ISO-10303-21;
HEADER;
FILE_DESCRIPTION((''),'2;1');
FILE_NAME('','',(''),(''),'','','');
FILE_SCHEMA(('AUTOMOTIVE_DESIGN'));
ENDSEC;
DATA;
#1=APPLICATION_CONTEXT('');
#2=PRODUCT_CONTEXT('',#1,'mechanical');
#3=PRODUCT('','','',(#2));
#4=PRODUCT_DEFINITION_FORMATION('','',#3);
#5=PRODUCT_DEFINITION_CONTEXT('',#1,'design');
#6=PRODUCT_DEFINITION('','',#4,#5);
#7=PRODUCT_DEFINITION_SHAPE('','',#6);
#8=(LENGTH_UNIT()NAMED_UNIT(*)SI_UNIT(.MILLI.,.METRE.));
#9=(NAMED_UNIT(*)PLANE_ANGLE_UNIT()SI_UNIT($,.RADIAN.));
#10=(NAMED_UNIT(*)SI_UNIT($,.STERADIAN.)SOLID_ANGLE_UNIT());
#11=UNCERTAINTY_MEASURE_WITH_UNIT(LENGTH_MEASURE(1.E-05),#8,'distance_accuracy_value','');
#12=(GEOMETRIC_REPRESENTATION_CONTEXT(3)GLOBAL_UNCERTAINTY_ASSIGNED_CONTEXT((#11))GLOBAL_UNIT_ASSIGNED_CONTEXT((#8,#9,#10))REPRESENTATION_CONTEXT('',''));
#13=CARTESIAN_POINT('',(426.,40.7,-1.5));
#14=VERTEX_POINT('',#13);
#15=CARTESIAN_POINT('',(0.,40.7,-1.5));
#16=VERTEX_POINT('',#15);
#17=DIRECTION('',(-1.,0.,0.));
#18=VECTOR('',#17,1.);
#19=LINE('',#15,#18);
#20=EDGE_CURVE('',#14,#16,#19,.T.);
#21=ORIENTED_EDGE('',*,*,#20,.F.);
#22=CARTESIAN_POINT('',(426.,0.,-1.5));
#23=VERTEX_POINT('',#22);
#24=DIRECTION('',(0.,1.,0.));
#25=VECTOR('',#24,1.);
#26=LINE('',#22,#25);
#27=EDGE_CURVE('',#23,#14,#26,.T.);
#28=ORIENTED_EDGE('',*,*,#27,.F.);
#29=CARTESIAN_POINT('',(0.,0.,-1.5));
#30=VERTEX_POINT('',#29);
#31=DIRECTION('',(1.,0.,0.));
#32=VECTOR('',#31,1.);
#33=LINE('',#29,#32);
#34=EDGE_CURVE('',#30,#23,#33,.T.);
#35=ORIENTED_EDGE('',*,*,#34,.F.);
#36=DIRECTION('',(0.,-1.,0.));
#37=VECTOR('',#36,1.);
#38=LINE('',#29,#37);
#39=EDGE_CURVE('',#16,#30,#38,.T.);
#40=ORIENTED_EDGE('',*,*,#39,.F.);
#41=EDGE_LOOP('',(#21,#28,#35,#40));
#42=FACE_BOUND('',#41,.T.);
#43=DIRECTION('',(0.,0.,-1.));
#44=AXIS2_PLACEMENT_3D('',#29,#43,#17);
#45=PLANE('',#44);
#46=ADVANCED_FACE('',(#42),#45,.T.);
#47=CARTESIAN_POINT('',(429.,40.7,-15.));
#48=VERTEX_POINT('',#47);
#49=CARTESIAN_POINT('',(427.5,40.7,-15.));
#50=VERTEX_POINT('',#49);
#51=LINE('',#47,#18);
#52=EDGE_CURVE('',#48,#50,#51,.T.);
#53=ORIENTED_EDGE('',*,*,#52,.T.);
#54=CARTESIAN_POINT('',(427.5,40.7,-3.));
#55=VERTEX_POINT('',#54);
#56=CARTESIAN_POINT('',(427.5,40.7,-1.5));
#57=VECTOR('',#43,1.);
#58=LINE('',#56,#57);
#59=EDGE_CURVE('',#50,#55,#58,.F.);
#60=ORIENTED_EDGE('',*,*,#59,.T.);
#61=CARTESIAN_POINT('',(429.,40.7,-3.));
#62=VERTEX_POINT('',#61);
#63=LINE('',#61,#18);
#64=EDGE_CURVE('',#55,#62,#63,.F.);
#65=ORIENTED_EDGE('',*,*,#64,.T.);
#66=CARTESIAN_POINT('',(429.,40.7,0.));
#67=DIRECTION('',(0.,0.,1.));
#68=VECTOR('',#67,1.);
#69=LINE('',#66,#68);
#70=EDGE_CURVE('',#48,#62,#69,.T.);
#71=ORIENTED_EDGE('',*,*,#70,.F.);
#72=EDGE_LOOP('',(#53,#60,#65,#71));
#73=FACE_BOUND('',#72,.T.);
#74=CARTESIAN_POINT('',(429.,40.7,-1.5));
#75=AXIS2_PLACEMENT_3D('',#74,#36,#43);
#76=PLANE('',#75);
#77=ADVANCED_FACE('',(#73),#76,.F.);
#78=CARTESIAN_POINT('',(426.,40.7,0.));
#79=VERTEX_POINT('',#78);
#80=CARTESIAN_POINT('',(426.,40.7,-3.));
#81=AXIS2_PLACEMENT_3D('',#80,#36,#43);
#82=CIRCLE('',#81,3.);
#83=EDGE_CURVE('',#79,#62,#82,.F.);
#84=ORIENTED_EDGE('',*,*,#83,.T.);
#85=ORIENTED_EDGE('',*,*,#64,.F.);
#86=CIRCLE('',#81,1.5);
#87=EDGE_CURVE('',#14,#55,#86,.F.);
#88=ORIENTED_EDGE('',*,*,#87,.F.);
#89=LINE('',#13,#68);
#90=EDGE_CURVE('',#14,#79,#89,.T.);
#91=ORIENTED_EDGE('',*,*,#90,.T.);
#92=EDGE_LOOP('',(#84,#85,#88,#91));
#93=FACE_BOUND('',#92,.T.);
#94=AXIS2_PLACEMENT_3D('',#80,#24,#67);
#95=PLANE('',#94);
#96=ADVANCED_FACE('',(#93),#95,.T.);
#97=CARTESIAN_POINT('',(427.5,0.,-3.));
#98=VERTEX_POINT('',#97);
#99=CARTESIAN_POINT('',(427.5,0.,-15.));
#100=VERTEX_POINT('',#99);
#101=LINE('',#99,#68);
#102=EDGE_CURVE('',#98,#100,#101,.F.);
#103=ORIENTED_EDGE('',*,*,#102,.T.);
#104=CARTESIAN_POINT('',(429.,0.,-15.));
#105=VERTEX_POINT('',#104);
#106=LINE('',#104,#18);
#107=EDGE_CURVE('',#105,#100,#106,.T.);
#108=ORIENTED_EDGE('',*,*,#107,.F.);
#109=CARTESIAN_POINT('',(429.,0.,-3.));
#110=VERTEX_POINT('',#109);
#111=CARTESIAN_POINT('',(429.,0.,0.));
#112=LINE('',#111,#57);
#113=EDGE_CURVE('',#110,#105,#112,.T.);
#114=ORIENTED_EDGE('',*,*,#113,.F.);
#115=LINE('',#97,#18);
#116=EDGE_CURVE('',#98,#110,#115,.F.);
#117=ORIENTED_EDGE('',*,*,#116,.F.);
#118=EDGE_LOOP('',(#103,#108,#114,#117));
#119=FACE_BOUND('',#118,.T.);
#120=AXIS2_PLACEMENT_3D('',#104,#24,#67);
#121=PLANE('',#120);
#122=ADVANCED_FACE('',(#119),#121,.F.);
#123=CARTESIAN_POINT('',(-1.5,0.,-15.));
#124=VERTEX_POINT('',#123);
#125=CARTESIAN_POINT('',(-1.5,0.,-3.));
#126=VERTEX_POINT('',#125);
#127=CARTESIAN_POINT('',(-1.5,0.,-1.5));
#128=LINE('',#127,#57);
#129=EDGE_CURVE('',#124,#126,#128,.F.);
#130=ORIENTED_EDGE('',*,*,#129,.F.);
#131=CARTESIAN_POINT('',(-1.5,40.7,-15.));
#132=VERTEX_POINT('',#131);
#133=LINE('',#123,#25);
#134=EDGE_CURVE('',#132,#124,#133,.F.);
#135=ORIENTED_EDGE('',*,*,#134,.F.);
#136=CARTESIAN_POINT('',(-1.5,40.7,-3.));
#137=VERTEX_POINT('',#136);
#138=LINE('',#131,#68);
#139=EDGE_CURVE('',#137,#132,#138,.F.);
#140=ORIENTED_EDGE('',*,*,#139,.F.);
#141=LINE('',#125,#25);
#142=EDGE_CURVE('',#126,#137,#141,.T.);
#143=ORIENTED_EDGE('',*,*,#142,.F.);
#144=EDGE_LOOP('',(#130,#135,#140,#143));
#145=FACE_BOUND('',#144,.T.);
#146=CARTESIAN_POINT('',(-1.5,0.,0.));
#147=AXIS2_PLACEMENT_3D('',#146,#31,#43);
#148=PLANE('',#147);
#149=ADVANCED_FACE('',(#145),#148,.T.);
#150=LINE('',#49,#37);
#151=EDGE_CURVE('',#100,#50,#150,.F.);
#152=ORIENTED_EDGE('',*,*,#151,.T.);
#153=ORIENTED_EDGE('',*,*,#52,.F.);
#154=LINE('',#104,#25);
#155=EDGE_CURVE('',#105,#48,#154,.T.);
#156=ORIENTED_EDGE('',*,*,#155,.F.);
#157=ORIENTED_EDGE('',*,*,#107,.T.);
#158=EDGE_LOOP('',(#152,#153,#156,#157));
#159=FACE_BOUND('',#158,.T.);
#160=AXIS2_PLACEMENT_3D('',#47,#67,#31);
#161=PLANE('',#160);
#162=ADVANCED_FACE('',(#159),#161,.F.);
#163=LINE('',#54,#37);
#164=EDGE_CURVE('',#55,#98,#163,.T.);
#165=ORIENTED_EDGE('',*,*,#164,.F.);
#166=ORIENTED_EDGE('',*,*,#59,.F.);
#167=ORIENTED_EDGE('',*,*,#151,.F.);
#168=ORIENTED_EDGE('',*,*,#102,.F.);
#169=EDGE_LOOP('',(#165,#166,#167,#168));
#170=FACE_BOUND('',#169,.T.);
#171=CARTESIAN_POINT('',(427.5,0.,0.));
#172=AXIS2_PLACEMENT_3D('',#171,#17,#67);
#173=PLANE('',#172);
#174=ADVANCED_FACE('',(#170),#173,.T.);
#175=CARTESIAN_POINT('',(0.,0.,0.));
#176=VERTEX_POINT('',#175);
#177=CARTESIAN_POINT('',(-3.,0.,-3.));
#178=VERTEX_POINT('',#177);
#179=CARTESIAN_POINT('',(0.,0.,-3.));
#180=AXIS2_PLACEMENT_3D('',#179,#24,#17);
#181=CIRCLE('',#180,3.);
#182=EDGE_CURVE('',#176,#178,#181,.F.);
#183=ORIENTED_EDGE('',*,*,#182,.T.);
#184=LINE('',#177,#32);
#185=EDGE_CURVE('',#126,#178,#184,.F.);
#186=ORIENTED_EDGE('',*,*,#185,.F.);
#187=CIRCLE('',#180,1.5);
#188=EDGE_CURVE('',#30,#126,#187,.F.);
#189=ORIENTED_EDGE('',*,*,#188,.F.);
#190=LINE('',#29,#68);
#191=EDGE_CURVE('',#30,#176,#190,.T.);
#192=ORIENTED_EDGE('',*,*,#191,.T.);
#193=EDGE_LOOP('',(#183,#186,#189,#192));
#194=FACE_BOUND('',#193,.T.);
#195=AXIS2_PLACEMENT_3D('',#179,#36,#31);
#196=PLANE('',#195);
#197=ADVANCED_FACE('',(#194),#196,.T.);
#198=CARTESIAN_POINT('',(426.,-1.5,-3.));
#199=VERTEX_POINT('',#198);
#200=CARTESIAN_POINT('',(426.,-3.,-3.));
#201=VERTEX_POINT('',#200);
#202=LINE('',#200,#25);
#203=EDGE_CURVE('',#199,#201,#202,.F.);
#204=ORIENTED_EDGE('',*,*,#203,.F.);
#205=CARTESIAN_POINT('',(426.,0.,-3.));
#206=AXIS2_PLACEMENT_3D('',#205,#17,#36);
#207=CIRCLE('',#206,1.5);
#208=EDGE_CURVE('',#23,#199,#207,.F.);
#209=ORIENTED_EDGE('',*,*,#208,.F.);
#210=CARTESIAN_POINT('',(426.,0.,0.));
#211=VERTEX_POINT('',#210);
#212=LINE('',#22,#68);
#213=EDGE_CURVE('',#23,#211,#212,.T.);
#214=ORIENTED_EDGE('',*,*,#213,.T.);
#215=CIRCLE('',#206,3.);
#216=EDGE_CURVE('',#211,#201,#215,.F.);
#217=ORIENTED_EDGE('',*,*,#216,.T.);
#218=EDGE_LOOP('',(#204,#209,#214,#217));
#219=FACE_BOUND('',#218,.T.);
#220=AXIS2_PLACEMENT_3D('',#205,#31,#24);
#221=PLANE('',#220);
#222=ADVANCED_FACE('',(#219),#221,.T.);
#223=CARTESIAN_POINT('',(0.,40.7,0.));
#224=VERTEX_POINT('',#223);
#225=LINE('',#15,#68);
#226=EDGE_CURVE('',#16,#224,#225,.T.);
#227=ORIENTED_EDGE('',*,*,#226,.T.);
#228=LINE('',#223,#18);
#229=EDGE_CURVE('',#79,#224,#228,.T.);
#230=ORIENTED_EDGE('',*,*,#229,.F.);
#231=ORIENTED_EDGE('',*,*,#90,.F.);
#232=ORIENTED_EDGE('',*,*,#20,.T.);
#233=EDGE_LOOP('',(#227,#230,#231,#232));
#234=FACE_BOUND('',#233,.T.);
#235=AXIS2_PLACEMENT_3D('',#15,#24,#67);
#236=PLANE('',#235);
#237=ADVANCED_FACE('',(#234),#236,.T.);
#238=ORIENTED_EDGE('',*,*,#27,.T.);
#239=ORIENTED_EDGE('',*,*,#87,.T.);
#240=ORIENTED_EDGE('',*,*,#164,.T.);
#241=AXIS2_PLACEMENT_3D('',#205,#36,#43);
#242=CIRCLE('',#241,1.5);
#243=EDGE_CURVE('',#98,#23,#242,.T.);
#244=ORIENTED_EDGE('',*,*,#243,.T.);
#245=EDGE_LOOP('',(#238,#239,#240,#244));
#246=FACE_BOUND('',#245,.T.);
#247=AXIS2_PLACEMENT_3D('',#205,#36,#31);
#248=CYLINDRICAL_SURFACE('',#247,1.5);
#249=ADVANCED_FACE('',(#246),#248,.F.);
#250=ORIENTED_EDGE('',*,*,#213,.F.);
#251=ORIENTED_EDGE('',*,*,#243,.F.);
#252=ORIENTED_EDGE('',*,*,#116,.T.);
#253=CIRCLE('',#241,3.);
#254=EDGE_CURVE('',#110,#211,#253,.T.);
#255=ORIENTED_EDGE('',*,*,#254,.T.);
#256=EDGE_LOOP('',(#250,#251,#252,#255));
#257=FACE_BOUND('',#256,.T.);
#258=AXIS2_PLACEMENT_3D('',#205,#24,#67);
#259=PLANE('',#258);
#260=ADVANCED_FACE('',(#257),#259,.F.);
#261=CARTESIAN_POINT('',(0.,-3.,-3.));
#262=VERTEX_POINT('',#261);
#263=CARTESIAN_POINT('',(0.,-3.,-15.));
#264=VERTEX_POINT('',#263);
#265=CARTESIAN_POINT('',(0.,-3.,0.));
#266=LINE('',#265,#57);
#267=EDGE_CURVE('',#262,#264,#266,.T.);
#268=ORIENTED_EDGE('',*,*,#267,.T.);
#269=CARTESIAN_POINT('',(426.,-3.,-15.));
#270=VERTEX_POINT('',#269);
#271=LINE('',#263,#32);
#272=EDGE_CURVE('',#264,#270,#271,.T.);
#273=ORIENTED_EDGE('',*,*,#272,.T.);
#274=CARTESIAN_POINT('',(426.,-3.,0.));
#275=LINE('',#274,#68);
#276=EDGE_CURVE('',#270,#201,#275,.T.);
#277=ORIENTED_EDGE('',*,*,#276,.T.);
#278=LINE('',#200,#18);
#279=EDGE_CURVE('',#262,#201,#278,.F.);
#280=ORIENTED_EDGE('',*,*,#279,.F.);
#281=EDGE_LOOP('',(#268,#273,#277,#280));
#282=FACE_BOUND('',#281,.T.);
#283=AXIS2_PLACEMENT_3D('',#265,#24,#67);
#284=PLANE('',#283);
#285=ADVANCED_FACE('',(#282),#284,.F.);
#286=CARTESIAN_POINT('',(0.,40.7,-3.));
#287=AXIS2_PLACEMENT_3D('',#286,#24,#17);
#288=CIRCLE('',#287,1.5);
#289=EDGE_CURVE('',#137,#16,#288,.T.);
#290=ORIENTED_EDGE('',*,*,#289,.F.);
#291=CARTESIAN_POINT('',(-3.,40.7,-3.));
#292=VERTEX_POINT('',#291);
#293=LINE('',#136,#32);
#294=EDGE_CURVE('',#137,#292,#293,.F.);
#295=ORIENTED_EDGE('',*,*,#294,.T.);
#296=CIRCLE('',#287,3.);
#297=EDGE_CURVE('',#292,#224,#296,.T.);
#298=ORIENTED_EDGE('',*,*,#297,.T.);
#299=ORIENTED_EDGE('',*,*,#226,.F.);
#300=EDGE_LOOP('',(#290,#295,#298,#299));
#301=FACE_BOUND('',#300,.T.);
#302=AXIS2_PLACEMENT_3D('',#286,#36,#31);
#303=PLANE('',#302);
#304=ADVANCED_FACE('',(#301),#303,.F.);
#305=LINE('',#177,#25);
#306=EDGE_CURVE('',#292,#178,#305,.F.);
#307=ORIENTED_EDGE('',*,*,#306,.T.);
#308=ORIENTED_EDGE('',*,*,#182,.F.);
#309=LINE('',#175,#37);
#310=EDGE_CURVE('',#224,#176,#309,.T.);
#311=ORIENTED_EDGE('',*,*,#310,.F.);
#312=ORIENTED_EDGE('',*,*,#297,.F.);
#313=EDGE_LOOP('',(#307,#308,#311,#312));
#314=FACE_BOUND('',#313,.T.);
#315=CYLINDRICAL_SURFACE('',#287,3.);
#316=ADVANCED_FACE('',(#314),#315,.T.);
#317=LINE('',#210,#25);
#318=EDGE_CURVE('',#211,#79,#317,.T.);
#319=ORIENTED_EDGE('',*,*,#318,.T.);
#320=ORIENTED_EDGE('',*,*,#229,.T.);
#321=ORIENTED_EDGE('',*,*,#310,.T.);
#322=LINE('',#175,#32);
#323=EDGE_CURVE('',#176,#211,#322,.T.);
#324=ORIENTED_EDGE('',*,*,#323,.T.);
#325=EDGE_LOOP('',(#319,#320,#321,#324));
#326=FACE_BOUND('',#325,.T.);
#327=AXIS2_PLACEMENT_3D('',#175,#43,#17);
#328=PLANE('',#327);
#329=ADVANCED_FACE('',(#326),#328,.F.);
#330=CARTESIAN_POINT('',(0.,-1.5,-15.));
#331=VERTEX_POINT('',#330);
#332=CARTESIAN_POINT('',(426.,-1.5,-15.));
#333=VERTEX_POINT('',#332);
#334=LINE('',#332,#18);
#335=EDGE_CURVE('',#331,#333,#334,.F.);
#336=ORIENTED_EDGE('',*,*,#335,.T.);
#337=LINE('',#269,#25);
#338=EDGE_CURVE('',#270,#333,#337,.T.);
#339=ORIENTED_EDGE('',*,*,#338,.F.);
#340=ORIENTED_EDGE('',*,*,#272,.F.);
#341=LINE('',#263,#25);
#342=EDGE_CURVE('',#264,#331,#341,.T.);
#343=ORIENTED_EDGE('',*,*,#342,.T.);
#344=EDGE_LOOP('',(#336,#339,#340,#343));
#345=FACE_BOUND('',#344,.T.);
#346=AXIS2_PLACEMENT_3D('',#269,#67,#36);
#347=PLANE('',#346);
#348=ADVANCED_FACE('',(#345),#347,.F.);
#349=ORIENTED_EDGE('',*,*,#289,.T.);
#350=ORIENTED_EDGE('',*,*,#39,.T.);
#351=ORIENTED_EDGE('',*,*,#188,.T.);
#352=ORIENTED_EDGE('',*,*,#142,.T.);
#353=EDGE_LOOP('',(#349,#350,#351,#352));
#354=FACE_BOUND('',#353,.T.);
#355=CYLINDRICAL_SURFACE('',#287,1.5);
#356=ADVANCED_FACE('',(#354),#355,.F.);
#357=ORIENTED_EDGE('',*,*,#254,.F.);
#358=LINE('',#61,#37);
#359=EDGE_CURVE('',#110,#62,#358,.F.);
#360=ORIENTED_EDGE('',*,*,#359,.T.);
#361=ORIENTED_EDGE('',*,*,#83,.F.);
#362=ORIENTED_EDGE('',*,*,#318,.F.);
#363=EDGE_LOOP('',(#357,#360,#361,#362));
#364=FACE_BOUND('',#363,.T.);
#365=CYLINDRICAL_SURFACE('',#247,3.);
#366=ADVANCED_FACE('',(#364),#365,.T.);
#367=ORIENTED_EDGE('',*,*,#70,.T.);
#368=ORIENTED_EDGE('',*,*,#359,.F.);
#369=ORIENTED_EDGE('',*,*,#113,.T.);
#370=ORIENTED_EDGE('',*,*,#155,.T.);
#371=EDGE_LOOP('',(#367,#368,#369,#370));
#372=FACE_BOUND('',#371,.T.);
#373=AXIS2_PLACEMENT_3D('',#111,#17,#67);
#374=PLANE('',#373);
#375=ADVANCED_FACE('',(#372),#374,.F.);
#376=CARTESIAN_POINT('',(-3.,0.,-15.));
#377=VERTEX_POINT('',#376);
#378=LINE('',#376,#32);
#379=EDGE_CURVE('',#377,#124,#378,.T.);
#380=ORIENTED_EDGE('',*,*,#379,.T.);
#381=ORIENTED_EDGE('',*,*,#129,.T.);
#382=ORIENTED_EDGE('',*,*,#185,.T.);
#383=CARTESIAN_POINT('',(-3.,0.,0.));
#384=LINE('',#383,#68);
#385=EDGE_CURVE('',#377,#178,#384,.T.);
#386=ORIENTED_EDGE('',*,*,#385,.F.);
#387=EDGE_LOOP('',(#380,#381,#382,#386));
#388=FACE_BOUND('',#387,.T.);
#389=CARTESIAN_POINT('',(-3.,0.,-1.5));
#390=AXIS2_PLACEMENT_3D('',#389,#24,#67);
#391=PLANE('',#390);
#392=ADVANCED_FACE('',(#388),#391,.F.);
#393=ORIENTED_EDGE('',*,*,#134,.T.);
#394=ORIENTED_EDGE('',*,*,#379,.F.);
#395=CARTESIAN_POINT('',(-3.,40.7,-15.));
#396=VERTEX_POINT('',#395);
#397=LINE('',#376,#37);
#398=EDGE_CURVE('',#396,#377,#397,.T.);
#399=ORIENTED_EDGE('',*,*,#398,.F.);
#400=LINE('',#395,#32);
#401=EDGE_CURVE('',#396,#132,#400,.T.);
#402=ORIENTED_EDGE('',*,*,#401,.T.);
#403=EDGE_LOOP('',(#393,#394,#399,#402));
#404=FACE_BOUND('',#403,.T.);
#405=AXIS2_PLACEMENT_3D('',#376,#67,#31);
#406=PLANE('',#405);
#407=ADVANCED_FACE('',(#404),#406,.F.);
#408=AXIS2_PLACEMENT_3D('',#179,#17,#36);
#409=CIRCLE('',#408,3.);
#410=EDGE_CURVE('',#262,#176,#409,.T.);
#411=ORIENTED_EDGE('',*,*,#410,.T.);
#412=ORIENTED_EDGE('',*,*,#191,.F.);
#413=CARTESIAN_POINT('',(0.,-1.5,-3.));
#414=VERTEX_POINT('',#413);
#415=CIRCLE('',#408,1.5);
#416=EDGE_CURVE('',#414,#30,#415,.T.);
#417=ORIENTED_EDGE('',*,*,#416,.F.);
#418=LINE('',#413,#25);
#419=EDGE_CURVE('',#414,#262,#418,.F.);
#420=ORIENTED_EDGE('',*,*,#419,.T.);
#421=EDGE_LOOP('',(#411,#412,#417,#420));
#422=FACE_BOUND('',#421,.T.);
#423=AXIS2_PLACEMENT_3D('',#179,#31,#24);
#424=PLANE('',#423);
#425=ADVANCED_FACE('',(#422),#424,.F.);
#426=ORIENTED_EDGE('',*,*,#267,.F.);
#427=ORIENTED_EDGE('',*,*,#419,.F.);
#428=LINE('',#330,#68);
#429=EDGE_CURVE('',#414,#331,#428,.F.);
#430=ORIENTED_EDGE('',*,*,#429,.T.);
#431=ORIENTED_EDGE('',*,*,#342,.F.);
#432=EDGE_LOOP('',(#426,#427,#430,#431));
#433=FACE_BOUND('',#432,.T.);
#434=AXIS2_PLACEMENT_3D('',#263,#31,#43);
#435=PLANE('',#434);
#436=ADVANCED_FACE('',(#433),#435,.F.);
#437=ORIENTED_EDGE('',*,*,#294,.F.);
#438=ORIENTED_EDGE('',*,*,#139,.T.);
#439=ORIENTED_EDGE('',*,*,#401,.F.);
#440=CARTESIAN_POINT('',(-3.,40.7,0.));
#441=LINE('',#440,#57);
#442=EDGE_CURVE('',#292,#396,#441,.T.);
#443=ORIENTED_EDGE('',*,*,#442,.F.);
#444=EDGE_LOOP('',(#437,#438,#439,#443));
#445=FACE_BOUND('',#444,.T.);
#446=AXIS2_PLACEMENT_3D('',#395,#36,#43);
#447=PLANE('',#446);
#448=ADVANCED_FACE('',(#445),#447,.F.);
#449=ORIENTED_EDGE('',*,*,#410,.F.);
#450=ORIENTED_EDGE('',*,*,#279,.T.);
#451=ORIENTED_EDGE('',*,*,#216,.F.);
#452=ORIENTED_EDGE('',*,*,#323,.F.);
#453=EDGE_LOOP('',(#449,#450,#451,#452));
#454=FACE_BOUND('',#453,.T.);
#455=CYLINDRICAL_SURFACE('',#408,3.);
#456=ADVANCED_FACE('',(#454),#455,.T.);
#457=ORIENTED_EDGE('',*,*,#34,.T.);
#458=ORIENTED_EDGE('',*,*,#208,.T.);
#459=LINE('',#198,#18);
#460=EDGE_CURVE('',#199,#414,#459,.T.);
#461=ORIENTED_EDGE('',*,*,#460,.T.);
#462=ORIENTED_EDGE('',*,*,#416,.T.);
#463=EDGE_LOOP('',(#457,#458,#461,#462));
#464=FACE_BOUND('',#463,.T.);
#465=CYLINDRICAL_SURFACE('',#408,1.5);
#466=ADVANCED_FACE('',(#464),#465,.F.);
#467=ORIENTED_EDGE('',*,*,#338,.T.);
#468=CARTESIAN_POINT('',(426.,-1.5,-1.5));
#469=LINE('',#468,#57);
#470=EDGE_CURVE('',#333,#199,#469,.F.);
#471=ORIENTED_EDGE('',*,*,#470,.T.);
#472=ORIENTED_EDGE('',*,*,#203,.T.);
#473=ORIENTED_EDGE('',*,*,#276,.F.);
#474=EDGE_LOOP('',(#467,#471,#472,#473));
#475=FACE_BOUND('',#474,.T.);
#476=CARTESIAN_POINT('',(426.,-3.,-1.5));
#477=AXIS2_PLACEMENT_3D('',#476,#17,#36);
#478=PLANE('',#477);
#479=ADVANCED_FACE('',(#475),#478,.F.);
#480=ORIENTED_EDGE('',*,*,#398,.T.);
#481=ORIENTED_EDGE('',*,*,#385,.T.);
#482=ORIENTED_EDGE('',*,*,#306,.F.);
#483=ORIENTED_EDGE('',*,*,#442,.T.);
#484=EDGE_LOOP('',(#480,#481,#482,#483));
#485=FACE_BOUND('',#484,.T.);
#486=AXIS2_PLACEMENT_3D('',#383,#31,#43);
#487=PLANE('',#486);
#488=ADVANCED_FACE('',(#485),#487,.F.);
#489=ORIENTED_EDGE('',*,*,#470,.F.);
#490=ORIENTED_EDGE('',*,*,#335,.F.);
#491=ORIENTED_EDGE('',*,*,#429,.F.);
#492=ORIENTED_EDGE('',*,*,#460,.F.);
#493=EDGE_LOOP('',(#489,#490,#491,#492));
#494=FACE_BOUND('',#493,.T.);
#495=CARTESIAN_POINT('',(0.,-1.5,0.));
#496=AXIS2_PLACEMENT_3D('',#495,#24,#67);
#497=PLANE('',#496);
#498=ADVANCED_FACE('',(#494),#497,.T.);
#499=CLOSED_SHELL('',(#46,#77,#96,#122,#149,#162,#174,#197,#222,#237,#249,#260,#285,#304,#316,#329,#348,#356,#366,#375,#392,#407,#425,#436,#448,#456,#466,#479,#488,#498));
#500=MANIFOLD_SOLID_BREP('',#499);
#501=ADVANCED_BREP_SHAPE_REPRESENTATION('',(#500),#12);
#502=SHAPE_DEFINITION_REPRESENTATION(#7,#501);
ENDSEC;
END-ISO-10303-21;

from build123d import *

# Parameters (mm, degrees)
SKETCH_1_W             = 426
SKETCH_1_H             = 40.7
SM_BASE_FLANGE_1_DEPTH = 1.5
SM_EDGE_FLANGE_2_DEPTH = 40.7
SM_EDGE_FLANGE_3_DEPTH = 426
SM_EDGE_FLANGE_4_DEPTH = 40.7


# Sheet-metal steps are written as plain solids
with BuildPart() as part:
    # Sketch 1 → Базовая кромка1 (new body)
    with BuildSketch(Plane.XY):
        with Locations((213, 20.35)):
            Rectangle(SKETCH_1_W, SKETCH_1_H)
    extrude(amount=-SM_BASE_FLANGE_1_DEPTH)

    # Ребро-кромка2 section (across the edge) → Ребро-кромка2 (add)
    with BuildSketch(Plane(origin=(-1.5, 0, -1.5), x_dir=(1, 0, 0), z_dir=(0, 1, 0))):
        with BuildLine():
            Line((-1.5, 1.5), (-1.5, 13.5))
            Line((-1.5, 13.5), (0, 13.5))
            Line((0, 13.5), (0, 1.5))
            ThreePointArc((0, 1.5), (0.439339828, 0.439339828), (1.5, 0))
            Line((1.5, 0), (1.5, -1.5))
            ThreePointArc((1.5, -1.5), (-0.621320344, -0.621320344), (-1.5, 1.5))
        make_face()
    extrude(amount=SM_EDGE_FLANGE_2_DEPTH)

    # Ребро-кромка3 section (across the edge) → Ребро-кромка3 (add)
    with BuildSketch(Plane(origin=(426, -1.5, -1.5), x_dir=(0, 1, 0), z_dir=(-1, 0, 0))):
        with BuildLine():
            Line((-1.5, 1.5), (-1.5, 13.5))
            Line((-1.5, 13.5), (0, 13.5))
            Line((0, 13.5), (0, 1.5))
            ThreePointArc((0, 1.5), (0.439339828, 0.439339828), (1.5, 0))
            Line((1.5, 0), (1.5, -1.5))
            ThreePointArc((1.5, -1.5), (-0.621320344, -0.621320344), (-1.5, 1.5))
        make_face()
    extrude(amount=SM_EDGE_FLANGE_3_DEPTH)

    # Ребро-кромка4 section (across the edge) → Ребро-кромка4 (add)
    with BuildSketch(Plane(origin=(427.5, 40.7, -1.5), x_dir=(-1, 0, 0), z_dir=(0, -1, 0))):
        with BuildLine():
            Line((-1.5, 1.5), (-1.5, 13.5))
            Line((-1.5, 13.5), (0, 13.5))
            Line((0, 13.5), (0, 1.5))
            ThreePointArc((0, 1.5), (0.439339828, 0.439339828), (1.5, 0))
            Line((1.5, 0), (1.5, -1.5))
            ThreePointArc((1.5, -1.5), (-0.621320344, -0.621320344), (-1.5, 1.5))
        make_face()
    extrude(amount=SM_EDGE_FLANGE_4_DEPTH)


solid = part.part
